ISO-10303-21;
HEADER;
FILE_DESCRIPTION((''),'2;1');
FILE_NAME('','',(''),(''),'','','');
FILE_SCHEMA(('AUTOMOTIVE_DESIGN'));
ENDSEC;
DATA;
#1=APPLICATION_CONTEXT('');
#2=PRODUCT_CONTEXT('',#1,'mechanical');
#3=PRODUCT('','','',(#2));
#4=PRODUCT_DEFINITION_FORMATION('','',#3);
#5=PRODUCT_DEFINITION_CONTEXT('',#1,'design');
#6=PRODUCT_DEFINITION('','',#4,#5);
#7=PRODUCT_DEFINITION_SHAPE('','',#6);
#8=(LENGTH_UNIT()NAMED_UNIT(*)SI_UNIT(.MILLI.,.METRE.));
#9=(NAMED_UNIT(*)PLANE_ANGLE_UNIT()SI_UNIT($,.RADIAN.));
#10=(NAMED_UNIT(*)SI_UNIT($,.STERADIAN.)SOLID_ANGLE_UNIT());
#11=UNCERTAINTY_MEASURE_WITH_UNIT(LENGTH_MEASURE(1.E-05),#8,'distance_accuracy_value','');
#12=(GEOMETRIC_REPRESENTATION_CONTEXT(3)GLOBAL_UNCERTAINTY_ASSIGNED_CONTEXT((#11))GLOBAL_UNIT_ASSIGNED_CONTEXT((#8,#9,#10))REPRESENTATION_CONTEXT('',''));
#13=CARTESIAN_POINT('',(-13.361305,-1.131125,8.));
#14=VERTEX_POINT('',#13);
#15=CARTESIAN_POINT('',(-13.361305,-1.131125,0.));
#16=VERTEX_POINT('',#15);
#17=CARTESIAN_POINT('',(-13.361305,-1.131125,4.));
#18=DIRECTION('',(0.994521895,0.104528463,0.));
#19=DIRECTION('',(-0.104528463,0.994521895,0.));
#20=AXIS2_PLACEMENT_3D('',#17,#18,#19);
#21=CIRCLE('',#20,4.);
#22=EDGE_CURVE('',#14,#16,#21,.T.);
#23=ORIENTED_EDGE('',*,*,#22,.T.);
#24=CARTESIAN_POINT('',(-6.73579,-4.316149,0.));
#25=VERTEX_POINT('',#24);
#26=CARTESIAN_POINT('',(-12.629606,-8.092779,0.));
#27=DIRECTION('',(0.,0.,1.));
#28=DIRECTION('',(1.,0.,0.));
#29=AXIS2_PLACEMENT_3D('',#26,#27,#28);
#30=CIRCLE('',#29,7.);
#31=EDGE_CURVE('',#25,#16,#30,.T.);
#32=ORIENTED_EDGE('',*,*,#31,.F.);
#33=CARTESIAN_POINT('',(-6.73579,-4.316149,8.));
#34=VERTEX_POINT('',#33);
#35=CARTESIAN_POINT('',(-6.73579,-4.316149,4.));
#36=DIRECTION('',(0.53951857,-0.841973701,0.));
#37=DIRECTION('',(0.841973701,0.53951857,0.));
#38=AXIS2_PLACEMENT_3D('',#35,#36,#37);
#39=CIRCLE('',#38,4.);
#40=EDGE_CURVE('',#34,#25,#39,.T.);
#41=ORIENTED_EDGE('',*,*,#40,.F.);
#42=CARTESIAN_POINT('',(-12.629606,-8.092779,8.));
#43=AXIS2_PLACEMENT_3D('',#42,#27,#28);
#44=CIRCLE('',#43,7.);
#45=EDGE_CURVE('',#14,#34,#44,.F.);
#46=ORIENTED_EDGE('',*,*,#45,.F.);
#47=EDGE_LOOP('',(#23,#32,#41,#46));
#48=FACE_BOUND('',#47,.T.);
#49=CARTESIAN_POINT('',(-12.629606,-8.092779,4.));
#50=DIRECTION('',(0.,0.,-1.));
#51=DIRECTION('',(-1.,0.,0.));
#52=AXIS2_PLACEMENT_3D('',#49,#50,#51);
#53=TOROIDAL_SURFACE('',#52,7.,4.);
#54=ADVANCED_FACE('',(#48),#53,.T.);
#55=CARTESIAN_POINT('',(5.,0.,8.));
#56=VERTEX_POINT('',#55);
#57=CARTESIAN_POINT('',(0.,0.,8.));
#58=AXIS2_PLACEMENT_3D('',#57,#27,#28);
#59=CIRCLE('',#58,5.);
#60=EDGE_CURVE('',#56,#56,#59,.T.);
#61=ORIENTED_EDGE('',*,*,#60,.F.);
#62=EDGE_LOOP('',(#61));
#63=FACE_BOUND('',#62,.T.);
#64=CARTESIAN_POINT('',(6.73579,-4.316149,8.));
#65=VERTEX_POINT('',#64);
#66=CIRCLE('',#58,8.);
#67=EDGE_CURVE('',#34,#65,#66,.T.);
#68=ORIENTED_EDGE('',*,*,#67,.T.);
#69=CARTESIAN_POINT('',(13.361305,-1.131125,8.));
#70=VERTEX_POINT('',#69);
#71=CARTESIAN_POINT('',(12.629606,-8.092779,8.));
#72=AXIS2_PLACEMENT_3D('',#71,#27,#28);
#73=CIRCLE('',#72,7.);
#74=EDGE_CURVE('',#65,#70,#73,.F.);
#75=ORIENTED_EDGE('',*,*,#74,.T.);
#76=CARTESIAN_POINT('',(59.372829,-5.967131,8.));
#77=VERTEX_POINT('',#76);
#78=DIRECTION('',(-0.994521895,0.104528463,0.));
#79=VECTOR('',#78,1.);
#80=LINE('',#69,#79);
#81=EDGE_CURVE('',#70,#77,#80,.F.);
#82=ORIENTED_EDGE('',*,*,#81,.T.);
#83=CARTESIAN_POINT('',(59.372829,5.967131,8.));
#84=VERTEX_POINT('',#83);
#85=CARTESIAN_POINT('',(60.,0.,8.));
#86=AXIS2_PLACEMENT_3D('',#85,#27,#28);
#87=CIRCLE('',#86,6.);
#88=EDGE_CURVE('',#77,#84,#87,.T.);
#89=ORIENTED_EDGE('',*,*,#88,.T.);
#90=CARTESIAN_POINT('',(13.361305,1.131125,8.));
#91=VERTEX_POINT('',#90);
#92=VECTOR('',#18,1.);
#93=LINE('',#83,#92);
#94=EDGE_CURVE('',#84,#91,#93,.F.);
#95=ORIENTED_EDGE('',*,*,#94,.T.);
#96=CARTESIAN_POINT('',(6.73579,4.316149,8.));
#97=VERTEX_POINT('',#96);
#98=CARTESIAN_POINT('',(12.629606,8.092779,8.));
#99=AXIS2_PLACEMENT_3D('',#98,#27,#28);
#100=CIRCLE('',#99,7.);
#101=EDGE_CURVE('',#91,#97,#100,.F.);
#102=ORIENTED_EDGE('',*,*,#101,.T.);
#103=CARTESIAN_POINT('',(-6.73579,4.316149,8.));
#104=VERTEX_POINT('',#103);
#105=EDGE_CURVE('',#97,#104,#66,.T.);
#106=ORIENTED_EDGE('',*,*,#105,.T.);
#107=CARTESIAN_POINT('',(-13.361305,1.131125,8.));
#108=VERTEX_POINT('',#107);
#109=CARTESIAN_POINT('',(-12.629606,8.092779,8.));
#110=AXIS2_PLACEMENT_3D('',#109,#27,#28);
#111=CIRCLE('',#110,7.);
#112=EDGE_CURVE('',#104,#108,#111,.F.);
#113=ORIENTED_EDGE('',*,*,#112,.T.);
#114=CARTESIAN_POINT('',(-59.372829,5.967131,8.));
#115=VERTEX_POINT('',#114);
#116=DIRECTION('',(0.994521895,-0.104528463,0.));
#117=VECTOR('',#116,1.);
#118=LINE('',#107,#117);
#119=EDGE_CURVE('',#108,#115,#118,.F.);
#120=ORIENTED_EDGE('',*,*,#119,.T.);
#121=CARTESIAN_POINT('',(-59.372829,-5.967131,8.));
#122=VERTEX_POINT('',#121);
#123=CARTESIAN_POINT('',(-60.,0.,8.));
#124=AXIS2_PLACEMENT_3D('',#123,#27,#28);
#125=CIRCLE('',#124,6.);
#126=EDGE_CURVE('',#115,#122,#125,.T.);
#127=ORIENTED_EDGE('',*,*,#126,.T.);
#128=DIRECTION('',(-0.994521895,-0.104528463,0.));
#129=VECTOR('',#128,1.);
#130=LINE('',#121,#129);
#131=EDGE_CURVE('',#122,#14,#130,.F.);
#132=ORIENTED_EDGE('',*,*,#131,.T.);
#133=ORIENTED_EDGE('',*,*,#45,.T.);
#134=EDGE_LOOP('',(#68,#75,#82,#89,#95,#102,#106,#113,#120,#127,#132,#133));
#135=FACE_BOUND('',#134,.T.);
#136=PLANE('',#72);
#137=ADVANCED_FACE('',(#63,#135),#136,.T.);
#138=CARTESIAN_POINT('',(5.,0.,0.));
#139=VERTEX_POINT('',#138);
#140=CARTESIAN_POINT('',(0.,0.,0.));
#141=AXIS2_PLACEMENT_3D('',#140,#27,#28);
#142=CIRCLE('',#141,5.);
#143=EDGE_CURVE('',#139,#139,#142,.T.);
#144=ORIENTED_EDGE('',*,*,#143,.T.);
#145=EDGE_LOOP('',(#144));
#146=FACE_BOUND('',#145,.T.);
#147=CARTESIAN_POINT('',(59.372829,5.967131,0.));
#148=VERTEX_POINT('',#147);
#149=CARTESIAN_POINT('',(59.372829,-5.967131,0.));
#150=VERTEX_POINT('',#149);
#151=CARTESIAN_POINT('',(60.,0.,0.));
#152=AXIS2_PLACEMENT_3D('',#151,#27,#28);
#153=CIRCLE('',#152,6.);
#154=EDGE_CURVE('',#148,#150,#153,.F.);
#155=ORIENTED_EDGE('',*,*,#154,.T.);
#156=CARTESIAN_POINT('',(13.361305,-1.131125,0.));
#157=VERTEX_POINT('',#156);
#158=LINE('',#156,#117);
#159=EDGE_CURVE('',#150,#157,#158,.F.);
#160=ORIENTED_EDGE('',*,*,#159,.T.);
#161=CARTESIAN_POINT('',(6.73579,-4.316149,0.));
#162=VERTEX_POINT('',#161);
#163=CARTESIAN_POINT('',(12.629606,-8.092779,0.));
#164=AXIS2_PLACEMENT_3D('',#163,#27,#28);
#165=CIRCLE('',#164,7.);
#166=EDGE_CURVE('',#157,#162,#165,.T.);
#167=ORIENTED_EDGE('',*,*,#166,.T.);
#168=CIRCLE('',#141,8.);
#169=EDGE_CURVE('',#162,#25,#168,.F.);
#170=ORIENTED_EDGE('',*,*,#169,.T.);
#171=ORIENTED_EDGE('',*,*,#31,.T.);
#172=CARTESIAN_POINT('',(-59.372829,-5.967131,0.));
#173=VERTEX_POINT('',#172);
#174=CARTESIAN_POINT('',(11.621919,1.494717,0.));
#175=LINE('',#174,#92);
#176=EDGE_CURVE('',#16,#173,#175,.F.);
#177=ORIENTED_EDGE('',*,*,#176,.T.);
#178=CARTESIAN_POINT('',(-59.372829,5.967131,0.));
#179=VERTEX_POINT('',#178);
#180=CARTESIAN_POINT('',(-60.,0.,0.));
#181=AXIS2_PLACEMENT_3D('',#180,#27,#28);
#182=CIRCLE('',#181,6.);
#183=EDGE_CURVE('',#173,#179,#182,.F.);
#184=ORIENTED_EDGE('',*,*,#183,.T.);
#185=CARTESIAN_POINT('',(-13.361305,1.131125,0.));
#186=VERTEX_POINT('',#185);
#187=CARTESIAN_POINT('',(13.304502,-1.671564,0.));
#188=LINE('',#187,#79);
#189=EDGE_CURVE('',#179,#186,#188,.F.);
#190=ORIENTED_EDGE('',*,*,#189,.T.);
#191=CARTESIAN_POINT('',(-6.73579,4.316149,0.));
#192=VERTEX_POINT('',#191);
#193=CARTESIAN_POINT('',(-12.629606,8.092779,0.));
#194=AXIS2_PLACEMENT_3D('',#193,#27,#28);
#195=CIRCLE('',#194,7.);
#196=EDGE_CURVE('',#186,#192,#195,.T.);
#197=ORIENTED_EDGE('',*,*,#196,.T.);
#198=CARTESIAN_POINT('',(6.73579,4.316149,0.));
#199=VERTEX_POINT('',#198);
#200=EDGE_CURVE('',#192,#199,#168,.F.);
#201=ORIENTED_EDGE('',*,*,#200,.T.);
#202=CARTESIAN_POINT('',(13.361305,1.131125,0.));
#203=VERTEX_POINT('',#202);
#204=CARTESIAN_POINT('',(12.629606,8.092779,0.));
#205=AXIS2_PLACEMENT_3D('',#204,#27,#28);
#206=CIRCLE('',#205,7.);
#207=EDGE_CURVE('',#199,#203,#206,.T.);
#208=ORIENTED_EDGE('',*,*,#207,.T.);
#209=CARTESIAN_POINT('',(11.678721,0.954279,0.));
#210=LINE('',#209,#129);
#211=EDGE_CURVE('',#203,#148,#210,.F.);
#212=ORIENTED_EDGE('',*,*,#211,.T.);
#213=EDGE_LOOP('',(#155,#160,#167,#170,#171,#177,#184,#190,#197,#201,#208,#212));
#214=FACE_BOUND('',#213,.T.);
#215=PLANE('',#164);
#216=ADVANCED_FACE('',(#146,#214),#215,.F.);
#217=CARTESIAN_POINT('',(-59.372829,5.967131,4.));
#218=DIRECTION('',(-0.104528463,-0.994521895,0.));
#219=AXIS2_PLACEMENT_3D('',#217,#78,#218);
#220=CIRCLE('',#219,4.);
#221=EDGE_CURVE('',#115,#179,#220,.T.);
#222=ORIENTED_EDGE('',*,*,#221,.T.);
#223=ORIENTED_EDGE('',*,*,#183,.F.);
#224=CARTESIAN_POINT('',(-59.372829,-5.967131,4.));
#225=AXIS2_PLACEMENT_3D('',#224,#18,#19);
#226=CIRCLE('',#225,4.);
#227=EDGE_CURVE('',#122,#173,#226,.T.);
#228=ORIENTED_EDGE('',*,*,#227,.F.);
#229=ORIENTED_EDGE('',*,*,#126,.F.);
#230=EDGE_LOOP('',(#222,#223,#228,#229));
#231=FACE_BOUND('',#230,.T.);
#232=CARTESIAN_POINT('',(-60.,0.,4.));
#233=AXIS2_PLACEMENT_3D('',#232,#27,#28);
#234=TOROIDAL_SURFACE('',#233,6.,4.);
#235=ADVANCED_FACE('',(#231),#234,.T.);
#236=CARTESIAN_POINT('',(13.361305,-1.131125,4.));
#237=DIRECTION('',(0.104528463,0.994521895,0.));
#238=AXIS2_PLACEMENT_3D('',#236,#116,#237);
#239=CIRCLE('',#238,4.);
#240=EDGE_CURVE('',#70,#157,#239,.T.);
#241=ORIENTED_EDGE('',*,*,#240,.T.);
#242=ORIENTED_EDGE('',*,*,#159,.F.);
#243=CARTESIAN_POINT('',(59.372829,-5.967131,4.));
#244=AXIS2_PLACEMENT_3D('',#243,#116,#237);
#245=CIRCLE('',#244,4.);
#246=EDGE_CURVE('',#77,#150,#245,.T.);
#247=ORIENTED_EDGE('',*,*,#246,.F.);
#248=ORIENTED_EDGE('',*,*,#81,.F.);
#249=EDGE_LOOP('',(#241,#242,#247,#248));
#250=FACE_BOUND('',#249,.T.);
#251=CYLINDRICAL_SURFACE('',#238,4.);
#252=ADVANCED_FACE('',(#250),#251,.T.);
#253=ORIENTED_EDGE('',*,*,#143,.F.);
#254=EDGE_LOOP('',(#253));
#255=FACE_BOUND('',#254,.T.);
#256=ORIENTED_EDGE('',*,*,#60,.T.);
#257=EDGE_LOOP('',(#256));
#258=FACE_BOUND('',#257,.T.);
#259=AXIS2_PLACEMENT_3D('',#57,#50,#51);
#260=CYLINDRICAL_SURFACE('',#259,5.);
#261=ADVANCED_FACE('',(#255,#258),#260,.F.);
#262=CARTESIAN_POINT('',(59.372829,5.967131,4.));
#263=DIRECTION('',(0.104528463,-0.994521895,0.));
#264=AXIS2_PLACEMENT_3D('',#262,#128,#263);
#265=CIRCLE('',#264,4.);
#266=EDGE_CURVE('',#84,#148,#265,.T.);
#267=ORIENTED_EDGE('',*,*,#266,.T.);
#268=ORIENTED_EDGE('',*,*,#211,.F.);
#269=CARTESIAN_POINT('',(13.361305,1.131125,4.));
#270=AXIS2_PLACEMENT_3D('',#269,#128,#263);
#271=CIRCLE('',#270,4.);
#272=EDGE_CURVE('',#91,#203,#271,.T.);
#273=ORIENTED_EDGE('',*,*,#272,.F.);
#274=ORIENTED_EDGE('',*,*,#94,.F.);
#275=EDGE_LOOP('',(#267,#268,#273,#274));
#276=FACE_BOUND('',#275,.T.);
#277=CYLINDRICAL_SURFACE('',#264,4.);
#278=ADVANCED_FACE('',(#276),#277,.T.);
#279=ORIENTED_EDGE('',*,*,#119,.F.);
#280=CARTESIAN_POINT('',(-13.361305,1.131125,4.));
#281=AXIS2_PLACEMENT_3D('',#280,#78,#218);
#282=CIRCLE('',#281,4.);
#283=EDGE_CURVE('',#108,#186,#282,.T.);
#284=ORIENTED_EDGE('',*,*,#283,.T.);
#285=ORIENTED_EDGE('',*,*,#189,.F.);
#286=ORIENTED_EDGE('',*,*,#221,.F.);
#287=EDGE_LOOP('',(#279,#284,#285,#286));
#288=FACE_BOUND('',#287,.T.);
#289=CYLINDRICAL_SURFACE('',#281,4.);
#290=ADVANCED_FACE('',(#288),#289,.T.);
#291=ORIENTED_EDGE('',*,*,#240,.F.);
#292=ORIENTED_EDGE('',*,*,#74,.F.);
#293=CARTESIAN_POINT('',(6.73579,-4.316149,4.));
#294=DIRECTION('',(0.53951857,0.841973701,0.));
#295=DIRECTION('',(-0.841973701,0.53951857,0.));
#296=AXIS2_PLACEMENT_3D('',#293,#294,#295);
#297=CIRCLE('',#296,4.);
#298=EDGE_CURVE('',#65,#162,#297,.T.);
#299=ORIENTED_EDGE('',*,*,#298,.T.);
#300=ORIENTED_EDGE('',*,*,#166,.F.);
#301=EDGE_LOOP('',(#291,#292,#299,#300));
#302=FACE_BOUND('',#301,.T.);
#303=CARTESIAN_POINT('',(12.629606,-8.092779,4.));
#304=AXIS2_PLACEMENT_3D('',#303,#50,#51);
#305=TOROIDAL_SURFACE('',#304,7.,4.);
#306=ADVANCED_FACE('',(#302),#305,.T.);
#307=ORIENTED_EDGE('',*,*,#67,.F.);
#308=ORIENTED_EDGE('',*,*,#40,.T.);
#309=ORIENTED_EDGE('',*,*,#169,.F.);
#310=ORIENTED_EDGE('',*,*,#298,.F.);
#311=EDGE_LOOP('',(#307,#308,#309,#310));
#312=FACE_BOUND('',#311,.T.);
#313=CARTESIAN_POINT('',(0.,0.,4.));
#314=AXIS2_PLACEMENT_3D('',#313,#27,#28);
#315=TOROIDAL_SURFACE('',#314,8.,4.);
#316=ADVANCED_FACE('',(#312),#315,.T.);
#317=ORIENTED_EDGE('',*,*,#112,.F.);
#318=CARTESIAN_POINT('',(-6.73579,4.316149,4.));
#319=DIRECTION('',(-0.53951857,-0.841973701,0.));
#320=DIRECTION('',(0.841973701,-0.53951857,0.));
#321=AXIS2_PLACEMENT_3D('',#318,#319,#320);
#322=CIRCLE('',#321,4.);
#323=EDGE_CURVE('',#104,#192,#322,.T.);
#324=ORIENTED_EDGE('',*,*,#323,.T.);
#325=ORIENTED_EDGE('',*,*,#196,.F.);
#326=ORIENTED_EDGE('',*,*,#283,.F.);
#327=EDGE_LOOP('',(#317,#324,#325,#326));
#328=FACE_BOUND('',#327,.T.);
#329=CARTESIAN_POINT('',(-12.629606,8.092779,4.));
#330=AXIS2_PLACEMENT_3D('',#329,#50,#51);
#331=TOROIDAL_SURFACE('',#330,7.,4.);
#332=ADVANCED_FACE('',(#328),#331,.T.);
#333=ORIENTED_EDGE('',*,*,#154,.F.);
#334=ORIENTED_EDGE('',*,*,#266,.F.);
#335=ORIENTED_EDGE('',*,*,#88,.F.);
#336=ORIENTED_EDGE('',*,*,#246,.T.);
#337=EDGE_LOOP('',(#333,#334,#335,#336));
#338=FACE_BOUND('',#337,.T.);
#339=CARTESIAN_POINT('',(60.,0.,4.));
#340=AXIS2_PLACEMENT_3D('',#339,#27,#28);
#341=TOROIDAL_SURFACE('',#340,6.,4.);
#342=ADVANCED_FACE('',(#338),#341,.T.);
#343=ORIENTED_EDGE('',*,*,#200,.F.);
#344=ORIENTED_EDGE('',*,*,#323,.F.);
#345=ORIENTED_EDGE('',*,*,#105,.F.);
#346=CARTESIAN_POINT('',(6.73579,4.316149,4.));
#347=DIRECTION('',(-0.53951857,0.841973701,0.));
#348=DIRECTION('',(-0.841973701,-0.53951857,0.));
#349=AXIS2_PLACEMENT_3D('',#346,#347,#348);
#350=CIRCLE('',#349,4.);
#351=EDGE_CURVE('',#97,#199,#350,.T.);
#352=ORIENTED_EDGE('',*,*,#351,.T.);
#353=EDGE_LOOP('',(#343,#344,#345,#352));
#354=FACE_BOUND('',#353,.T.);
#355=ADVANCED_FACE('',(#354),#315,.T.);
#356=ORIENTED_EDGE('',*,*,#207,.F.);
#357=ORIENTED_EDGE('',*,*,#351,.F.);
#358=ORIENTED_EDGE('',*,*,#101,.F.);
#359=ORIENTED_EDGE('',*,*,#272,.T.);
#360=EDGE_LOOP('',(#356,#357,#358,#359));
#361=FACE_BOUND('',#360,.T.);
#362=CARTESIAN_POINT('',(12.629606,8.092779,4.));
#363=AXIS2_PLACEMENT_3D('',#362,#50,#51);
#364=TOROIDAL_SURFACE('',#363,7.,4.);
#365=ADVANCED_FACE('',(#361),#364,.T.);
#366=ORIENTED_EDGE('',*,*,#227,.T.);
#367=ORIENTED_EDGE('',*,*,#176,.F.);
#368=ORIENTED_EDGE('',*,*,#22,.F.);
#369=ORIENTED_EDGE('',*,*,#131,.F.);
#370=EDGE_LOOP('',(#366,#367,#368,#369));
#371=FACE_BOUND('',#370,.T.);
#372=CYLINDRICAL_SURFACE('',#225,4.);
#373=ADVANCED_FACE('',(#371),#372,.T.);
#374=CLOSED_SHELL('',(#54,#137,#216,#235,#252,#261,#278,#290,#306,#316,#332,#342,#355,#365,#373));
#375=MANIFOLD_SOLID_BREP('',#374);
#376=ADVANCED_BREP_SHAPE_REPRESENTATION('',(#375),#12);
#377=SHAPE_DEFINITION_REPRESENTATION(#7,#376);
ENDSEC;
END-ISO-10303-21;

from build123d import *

# Parameters (mm, degrees)
SKETCH1_R           = 5
BOSS_EXTRUDE1_DEPTH = 8
FILLET1_R           = 4


with BuildPart() as part:
    # Sketch1 → Boss-Extrude1 (new body)
    with BuildSketch(Plane.XY):
        with BuildLine():
            Line((12.943190902, 5.109212861), (58.954715367, 9.945218954))
            ThreePointArc((58.954715367, 9.945218954), (70, 0), (58.954715367, -9.945218954))
            Line((58.954715367, -9.945218954), (12.943190902, -5.109212861))
            ThreePointArc((12.943190902, -5.109212861), (11.32982846, -5.388970193), (10.103684409, -6.474222838))
            ThreePointArc((10.103684409, -6.474222838), (0, -12), (-10.103684409, -6.474222838))
            ThreePointArc((-10.103684409, -6.474222838), (-11.32982846, -5.388970193), (-12.943190902, -5.109212861))
            Line((-12.943190902, -5.109212861), (-58.954715367, -9.945218954))
            ThreePointArc((-58.954715367, -9.945218954), (-70, 0), (-58.954715367, 9.945218954))
            Line((-58.954715367, 9.945218954), (-12.943190902, 5.109212861))
            ThreePointArc((-12.943190902, 5.109212861), (-11.32982846, 5.388970193), (-10.103684409, 6.474222838))
            ThreePointArc((-10.103684409, 6.474222838), (0, 12), (10.103684409, 6.474222838))
            ThreePointArc((10.103684409, 6.474222838), (11.32982846, 5.388970193), (12.943190902, 5.109212861))
        make_face()
        Circle(SKETCH1_R, mode=Mode.SUBTRACT)
    extrude(amount=BOSS_EXTRUDE1_DEPTH)

    # Fillet1
    fillet1_edges = [part.edges().sort_by_distance(p)[0] for p in [
        (0, 12, 0),
        (-11.32982846, -5.388970193, 0),
        (70, 0, 8),
        (-35.948953134, -7.527215907, 0),
        (-70, 0, 0),
        (-35.948953134, 7.527215907, 0),
        (-11.32982846, 5.388970193, 0),
        (11.32982846, 5.388970193, 0),
        (35.948953134, 7.527215907, 0),
        (35.948953134, -7.527215907, 0),
        (11.32982846, -5.388970193, 0),
        (35.948953134, 7.527215907, 8),
        (-35.948953134, 7.527215907, 8),
        (-35.948953134, -7.527215907, 8),
        (35.948953134, -7.527215907, 8),
    ]]
    fillet(fillet1_edges, radius=FILLET1_R - 0.0001)  # a hair under: the kernel refuses the full size


solid = part.part
